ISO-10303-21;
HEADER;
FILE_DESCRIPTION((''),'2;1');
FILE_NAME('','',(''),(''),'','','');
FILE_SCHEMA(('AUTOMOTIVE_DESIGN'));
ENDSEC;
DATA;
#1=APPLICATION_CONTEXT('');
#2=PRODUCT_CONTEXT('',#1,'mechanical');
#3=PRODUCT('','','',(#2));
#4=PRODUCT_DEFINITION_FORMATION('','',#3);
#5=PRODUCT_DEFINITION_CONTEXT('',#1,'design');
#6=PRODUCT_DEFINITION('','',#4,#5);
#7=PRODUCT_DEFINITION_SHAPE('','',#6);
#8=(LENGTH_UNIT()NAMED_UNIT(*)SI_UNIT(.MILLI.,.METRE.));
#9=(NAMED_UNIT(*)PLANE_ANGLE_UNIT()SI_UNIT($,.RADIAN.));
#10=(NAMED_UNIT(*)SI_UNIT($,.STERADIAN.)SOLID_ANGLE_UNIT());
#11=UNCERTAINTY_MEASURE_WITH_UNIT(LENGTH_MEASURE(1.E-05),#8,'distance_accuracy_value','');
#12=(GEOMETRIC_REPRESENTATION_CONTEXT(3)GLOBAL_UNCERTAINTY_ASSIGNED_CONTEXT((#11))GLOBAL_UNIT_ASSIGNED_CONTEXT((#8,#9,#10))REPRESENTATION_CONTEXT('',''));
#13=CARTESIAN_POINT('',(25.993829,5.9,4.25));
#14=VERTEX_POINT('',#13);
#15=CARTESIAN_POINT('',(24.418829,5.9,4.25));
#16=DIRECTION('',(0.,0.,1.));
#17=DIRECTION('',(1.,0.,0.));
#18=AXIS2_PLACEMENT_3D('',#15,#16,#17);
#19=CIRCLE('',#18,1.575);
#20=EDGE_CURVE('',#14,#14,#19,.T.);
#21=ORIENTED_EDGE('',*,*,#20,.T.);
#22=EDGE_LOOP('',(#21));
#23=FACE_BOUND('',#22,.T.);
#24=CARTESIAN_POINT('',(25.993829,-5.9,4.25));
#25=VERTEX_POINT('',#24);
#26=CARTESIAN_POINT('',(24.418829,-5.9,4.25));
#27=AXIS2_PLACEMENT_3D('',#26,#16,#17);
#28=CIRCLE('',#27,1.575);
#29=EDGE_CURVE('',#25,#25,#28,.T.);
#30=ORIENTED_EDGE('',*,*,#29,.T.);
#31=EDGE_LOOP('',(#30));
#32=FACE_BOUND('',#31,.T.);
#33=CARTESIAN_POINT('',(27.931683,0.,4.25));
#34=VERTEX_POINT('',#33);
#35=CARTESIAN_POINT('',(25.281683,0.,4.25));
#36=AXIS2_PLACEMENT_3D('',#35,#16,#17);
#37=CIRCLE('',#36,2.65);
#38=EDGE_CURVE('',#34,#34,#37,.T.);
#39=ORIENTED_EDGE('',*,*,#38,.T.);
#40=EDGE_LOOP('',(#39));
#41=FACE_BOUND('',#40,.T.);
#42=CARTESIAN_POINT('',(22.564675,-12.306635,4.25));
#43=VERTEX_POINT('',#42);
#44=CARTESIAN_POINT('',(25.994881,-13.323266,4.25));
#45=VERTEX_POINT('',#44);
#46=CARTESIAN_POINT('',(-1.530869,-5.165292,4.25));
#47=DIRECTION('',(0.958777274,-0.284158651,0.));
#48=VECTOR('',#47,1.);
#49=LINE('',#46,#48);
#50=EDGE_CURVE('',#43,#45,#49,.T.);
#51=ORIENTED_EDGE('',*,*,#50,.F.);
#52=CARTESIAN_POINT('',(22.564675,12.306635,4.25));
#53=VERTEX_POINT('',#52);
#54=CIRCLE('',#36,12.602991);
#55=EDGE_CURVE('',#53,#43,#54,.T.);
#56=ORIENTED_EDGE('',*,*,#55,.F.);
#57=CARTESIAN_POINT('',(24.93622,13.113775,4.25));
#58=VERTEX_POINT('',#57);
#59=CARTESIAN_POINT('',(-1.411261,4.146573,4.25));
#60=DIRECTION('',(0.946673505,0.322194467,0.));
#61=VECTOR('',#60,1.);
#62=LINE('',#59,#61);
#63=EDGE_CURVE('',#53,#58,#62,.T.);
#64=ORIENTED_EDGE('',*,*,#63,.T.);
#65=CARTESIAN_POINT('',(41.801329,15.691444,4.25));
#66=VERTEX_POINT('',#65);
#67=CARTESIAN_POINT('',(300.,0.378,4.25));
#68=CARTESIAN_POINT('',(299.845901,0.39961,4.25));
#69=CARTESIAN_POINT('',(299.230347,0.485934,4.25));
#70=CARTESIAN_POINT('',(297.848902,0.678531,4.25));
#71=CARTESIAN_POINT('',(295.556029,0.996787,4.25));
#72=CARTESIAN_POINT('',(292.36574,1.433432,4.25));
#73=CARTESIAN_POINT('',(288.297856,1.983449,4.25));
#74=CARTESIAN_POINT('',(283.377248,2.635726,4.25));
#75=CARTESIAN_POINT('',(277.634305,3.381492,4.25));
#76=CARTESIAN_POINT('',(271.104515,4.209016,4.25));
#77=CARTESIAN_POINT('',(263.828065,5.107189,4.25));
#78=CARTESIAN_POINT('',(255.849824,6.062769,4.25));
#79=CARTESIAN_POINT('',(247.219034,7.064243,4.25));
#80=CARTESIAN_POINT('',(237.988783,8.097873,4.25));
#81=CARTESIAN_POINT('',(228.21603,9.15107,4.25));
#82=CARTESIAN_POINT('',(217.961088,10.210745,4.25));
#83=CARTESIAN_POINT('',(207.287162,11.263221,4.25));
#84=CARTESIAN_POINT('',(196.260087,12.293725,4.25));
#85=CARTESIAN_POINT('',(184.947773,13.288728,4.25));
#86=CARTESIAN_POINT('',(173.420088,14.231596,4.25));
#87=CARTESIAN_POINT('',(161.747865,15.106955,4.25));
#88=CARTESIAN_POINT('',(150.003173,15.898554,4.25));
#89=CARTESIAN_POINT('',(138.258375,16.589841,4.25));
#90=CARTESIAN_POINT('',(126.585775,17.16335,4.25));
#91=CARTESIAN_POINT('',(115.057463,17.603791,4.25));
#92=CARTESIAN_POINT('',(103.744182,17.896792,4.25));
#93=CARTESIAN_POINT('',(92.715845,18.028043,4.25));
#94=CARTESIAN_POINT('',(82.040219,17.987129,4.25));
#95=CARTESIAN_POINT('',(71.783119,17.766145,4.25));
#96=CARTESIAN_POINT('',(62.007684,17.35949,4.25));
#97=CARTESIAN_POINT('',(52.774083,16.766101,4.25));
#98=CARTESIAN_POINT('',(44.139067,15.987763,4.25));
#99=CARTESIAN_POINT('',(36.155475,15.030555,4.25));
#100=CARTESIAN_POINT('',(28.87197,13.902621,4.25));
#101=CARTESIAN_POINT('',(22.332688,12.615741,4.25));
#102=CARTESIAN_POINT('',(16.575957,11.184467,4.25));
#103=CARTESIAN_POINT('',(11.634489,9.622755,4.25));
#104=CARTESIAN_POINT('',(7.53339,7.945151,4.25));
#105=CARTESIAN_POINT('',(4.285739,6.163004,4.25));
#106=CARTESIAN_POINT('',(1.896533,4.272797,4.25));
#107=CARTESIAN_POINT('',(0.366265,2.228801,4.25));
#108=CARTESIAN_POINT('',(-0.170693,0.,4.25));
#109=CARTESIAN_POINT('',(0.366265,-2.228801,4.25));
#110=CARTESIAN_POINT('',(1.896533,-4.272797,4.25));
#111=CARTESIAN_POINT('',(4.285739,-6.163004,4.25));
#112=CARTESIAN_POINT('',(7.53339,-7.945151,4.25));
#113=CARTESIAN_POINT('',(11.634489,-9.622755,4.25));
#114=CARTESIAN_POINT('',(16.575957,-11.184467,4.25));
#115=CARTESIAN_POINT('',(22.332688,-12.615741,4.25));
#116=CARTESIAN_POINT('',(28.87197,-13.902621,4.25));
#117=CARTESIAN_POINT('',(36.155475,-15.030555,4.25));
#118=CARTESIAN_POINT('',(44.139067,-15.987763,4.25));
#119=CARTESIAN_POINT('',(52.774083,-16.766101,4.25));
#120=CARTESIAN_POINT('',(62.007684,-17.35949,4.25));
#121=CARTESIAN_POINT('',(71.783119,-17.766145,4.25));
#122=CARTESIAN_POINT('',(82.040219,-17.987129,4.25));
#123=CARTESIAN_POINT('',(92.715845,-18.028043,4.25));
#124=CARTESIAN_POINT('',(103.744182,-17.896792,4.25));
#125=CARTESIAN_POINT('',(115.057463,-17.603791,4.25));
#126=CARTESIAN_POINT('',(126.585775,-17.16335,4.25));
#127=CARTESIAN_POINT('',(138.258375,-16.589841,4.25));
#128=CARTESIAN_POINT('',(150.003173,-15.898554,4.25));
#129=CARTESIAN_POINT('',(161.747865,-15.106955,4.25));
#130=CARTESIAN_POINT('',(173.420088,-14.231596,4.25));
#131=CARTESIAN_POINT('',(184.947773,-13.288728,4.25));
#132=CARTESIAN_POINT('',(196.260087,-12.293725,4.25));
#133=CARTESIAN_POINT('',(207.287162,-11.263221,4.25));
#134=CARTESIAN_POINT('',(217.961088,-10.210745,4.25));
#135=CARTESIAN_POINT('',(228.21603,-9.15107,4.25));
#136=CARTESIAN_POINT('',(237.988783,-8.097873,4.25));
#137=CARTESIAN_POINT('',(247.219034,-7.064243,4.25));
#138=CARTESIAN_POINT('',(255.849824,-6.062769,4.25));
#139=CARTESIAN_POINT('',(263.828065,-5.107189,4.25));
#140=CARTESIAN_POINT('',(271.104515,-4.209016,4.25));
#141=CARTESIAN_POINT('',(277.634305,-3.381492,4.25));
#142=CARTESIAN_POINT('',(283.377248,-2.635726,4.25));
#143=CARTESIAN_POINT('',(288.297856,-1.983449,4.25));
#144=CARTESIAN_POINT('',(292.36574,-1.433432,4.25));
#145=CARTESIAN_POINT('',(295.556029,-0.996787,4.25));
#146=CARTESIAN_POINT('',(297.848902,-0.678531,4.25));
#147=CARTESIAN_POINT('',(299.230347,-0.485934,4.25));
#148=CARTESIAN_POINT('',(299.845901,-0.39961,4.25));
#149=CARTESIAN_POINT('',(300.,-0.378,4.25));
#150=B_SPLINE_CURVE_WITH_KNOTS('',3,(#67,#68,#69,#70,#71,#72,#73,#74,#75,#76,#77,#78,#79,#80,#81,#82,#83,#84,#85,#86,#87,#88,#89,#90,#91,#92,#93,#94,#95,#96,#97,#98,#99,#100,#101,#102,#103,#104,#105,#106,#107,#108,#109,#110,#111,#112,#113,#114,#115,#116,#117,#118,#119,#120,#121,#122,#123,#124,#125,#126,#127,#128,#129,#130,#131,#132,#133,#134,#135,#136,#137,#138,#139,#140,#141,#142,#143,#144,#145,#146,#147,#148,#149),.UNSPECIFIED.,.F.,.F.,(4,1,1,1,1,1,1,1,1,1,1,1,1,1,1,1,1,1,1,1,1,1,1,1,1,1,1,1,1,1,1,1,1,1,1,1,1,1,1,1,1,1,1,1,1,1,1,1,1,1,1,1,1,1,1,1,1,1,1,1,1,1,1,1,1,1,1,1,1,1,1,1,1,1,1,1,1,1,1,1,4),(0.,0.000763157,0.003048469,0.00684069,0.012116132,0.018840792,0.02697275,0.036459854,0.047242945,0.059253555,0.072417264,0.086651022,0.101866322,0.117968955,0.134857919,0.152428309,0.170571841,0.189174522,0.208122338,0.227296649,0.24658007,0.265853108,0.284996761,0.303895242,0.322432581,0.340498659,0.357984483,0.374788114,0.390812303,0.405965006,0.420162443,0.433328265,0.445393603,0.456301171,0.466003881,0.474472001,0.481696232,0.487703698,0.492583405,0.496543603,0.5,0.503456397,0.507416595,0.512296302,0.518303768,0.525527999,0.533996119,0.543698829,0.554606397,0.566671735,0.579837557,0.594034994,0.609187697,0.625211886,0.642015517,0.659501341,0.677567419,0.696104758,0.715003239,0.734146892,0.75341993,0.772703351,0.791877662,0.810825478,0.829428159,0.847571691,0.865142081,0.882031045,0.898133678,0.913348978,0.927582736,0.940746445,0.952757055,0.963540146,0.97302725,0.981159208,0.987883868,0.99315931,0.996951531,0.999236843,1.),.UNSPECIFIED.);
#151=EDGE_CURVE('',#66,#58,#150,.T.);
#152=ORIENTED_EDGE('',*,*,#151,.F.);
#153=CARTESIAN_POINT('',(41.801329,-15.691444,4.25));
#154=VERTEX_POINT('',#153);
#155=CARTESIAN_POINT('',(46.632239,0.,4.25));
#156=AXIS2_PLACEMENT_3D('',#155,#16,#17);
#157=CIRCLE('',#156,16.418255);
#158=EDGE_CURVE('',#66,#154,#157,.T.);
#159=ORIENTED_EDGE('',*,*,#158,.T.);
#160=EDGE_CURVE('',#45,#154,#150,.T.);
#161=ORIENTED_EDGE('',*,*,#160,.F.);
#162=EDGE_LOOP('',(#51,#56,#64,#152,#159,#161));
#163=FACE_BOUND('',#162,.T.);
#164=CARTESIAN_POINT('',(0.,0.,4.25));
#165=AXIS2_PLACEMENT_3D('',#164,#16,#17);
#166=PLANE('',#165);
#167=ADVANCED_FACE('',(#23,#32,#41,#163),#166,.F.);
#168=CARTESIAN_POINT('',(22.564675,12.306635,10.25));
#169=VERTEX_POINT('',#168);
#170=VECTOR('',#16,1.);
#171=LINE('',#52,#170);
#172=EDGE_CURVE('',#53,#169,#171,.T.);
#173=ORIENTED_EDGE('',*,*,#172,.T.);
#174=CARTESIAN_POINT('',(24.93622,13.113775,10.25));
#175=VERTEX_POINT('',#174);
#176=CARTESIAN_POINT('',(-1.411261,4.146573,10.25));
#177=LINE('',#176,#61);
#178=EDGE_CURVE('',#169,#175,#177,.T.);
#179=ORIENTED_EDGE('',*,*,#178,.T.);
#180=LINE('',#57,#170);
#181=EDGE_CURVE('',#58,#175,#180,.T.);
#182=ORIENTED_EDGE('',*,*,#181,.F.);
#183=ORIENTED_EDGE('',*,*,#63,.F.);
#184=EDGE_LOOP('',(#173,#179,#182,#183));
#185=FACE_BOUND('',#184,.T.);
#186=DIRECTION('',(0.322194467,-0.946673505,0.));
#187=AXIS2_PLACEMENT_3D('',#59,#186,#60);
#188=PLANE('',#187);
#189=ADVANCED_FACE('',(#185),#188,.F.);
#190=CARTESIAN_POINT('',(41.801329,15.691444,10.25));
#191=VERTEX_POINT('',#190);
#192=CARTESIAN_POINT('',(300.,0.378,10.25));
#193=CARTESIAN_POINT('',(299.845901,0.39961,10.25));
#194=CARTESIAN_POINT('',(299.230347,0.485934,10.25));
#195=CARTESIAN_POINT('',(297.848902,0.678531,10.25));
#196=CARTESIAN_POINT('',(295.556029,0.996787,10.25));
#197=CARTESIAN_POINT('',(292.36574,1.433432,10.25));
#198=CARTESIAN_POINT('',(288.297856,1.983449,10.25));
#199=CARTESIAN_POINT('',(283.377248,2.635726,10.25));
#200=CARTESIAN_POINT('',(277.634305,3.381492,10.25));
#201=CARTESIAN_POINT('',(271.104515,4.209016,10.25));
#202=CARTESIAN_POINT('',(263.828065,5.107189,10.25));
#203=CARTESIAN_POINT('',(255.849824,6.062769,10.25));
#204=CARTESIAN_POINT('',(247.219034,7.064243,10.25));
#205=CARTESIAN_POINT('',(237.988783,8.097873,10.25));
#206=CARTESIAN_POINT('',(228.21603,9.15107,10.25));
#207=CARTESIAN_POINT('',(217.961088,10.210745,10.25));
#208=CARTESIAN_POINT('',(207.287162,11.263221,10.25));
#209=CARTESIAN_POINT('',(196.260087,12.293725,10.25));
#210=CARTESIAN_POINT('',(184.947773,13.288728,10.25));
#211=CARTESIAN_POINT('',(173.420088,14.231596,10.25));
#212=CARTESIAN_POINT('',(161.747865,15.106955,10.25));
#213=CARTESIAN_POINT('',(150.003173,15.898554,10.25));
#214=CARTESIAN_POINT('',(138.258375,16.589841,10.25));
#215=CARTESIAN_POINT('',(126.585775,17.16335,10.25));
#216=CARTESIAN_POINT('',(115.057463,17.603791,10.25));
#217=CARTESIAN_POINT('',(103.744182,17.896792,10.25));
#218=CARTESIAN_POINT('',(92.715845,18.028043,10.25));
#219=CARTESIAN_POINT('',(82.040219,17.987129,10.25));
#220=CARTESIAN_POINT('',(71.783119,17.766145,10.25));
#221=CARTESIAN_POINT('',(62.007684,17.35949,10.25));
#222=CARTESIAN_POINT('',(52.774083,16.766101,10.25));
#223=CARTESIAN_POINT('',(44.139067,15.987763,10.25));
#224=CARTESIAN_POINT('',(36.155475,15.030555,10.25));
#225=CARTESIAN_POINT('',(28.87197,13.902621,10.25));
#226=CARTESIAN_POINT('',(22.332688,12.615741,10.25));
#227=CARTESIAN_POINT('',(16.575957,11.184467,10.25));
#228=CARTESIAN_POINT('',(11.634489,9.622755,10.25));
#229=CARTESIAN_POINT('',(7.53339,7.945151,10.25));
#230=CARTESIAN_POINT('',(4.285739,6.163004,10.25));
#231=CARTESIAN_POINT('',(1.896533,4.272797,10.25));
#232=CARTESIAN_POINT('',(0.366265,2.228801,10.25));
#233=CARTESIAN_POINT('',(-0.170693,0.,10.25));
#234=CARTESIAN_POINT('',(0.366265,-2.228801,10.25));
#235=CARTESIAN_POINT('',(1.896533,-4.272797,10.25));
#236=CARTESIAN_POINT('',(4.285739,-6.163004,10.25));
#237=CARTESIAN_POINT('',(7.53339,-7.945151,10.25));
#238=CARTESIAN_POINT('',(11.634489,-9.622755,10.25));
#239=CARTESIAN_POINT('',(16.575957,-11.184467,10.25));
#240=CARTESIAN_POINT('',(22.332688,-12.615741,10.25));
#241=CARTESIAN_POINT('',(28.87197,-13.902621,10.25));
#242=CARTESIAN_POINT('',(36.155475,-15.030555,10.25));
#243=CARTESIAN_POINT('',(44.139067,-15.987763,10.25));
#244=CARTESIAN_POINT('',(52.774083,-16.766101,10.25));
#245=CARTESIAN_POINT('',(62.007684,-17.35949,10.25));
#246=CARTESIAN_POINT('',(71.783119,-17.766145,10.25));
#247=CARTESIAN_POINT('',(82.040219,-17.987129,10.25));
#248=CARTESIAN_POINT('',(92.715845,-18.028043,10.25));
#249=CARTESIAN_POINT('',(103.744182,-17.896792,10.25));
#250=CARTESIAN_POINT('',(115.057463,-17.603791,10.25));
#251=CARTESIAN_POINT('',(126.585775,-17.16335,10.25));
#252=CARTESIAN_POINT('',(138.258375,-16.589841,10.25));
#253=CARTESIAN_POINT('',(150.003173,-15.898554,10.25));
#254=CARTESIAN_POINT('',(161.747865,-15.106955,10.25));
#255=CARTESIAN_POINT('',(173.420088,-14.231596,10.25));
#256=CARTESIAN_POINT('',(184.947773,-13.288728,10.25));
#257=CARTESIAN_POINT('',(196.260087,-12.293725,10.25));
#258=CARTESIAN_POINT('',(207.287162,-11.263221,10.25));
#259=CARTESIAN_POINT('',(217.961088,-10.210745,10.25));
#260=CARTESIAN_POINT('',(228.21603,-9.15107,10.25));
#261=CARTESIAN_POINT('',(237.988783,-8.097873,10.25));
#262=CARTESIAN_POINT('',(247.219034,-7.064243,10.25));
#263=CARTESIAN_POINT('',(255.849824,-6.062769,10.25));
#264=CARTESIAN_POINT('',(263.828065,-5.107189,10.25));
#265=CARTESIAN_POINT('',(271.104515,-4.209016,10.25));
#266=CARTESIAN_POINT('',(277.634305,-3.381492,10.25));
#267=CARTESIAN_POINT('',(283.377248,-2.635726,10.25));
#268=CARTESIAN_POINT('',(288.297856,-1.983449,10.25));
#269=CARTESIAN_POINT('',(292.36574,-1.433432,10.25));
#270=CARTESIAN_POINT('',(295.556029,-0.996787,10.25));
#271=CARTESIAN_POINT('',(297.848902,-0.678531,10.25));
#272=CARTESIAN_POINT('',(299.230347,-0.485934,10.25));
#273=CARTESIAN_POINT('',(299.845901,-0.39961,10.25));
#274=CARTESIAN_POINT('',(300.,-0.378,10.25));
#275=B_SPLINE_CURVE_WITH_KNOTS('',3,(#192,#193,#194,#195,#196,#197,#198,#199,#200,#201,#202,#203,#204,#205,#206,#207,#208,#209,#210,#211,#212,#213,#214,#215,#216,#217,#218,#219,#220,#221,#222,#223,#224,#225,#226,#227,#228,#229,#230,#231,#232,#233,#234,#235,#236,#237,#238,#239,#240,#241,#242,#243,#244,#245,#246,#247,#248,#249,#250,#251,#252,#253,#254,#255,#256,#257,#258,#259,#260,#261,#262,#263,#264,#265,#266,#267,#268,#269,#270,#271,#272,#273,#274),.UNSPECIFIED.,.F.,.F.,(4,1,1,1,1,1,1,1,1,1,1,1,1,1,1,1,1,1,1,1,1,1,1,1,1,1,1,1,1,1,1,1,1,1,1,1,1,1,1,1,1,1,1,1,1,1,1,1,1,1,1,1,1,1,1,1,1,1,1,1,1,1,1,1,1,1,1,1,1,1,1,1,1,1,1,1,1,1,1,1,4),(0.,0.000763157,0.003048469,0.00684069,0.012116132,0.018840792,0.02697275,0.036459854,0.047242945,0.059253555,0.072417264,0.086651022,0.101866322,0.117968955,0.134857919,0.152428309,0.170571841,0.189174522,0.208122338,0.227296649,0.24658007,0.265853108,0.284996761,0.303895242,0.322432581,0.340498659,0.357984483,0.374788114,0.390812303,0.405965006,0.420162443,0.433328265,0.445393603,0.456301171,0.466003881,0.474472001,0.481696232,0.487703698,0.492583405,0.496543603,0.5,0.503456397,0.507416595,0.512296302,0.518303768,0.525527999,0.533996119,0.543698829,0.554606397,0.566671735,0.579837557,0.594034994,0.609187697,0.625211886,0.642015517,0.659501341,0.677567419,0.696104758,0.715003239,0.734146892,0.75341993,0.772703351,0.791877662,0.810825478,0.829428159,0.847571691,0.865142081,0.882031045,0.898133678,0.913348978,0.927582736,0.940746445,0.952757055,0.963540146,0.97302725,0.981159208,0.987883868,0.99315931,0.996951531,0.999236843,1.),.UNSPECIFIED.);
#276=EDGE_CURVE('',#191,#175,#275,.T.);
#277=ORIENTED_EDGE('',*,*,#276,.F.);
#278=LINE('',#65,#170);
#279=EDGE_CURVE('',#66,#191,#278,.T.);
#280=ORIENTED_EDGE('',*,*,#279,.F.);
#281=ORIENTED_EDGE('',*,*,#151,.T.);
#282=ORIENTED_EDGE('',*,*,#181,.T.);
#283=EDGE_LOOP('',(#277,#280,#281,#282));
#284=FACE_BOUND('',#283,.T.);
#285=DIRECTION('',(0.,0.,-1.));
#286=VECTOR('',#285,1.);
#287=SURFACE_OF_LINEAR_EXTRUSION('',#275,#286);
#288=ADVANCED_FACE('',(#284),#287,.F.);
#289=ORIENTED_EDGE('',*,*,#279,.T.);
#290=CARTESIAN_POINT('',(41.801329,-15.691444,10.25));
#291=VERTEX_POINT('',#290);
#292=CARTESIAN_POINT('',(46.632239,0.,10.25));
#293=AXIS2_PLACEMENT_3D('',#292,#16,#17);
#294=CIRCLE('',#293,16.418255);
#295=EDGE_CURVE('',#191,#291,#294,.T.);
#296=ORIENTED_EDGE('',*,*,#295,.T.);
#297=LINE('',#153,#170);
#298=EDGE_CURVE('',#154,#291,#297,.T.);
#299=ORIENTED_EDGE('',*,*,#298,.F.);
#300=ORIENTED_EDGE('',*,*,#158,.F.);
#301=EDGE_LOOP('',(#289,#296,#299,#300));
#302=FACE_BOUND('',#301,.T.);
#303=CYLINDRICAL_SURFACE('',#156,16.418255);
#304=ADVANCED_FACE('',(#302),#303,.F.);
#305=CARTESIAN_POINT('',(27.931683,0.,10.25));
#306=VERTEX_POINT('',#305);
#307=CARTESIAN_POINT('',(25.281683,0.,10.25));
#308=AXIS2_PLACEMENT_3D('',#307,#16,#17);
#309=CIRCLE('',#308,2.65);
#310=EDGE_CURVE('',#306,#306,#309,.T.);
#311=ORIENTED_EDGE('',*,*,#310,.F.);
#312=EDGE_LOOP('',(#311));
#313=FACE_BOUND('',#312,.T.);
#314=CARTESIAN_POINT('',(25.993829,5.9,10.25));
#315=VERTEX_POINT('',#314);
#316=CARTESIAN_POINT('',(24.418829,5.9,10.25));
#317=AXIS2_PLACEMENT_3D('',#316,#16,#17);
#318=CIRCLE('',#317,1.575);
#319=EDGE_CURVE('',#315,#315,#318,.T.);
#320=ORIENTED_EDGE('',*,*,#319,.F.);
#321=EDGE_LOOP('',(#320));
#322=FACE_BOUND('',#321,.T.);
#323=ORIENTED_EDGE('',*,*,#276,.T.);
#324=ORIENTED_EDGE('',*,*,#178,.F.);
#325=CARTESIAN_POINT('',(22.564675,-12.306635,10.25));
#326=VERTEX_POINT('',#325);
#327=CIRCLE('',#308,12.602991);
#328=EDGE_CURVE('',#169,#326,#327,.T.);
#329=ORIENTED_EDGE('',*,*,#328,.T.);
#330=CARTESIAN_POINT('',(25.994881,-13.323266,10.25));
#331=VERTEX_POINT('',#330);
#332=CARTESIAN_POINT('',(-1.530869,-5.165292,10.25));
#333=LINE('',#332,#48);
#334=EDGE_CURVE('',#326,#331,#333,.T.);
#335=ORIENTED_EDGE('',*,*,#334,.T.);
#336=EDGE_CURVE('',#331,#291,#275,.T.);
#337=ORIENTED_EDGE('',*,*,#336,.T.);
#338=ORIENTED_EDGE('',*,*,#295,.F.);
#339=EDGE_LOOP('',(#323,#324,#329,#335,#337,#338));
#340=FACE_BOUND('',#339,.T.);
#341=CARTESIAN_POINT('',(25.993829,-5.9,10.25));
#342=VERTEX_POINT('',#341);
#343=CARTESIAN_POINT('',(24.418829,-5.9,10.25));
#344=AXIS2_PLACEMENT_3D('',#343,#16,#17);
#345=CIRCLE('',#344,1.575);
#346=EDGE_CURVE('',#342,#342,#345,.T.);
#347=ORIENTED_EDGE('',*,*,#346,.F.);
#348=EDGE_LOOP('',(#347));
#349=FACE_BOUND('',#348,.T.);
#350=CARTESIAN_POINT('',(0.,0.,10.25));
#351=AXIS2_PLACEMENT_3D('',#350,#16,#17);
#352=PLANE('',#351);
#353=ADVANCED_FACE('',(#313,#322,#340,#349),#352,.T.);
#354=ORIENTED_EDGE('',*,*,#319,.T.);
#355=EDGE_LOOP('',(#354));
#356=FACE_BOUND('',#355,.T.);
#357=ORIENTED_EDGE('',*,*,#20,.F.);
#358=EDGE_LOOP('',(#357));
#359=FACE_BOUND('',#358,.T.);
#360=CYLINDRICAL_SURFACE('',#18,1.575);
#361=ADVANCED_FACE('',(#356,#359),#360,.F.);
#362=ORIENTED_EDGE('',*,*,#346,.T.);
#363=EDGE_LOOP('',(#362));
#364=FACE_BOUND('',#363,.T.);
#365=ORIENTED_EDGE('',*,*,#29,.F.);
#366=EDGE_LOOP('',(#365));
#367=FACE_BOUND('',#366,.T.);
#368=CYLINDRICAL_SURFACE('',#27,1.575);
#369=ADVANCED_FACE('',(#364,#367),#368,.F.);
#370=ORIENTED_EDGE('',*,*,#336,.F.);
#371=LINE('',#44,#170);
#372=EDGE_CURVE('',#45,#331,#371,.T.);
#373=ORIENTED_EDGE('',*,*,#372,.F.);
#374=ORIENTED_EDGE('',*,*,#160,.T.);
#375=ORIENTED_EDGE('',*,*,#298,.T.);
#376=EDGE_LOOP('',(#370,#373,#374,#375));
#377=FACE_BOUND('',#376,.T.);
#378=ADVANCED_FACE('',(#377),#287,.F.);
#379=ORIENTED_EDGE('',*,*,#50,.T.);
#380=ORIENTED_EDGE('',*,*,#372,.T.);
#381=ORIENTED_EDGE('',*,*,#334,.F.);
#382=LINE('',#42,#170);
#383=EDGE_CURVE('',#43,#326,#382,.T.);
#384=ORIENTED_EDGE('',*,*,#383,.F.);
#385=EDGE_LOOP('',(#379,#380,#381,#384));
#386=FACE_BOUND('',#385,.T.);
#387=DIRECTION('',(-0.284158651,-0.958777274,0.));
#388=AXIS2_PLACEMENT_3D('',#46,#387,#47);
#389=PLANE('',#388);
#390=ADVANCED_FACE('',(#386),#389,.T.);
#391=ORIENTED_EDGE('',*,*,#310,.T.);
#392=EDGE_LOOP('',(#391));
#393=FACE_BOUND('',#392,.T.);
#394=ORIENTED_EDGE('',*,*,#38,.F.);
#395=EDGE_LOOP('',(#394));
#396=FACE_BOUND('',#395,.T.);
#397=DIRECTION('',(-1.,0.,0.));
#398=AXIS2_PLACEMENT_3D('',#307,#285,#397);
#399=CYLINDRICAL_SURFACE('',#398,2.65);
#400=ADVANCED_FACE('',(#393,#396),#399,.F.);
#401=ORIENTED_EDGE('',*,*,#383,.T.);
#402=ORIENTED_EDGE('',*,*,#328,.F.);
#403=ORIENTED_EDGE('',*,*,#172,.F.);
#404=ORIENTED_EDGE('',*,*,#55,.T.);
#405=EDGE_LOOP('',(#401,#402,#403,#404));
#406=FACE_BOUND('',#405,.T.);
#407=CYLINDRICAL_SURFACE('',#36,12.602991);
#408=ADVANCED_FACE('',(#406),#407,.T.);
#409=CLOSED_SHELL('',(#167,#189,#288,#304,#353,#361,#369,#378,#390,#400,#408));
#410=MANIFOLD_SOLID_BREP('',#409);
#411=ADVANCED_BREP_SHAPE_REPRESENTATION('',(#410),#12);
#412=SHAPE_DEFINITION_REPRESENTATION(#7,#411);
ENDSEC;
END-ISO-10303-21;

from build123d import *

# Parameters (mm, degrees)
BOSS_EXTRUDE1_START     = 4.25
BOSS_EXTRUDE1_OUTLINE_R = 2.65
BOSS_EXTRUDE1_DEPTH     = 6
CUT_EXTRUDE2_DEPTH      = 49.147003594
CUT_EXTRUDE3_DEPTH      = 46.050777478


# Read off the part's stored shape, not the designer's step: Boss-Extrude1
with BuildPart() as part:
    # Boss-Extrude1 outline → Boss-Extrude1 (new body)
    with BuildSketch(Plane.XY.offset(BOSS_EXTRUDE1_START)):
        with BuildLine():
            ThreePointArc((22.5, 12.599580353), (12.378691282, 0), (22.5, -12.599580353))
            add(Edge.make_bspline(
                [(22.5, -12.599580353), (24.539912926, -13.049943774), (29.005619164, -13.923317691), (36.155474951, -15.030554758), (41.619048326, -15.685620583), (44.644632939, -15.999223801), (45, -16.035396523)],
                knots=[0.544361959, 0.544361959, 0.544361959, 0.544361959, 0.554606397, 0.566671735, 0.579837557, 0.581589368, 0.581589368, 0.581589368, 0.581589368], degree=3))
            ThreePointArc((45, -16.035396523), (30.513983858, 0), (45, 16.035396523))
            add(Edge.make_bspline(
                [(45, 16.035396523), (44.644632939, 15.999223801), (41.619048326, 15.685620583), (36.155474951, 15.030554758), (29.005619164, 13.923317691), (24.539912926, 13.049943774), (22.5, 12.599580353)],
                knots=[0.418410632, 0.418410632, 0.418410632, 0.418410632, 0.420162443, 0.433328265, 0.445393603, 0.455638041, 0.455638041, 0.455638041, 0.455638041], degree=3))
        make_face()
        with Locations((25.281682512, 0)):
            Circle(BOSS_EXTRUDE1_OUTLINE_R, mode=Mode.SUBTRACT)
    extrude(amount=BOSS_EXTRUDE1_DEPTH)

    # Sketch3 → Cut-Extrude2 (cut, through all)
    with BuildSketch(Plane.XY.offset(10.25)):
        with BuildLine():
            ThreePointArc((22.564675294, -12.306634784), (12.678691282, 0), (22.564675294, 12.306634784))
            Line((22.564675294, 12.306634784), (24.936220162, 13.113775399))
            add(Edge.make_bspline(
                [(24.936220162, 13.113775399), (24.122635067, 12.949661044), (23.310473255, 12.77851324), (22.5, 12.599580353)],
                knots=[0.451567846, 0.451567846, 0.451567846, 0.451567846, 0.455638041, 0.455638041, 0.455638041, 0.455638041], degree=3))
            ThreePointArc((22.5, 12.599580353), (12.378691282, 0), (22.5, -12.599580353))
            add(Edge.make_bspline(
                [(22.5, -12.599580353), (23.661751431, -12.856066962), (24.826972348, -13.096557541), (25.994881444, -13.323265839)],
                knots=[0.544361959, 0.544361959, 0.544361959, 0.544361959, 0.550196272, 0.550196272, 0.550196272, 0.550196272], degree=3))
            Line((25.994881444, -13.323265839), (22.564675294, -12.306634784))
        make_face()
        with BuildLine():
            add(Edge.make_bspline(
                [(45, 16.035396523), (44.644632939, 15.999223801), (43.577975433, 15.888664266), (42.511942906, 15.772070236), (41.801329262, 15.691443866)],
                knots=[0.418410632, 0.418410632, 0.418410632, 0.418410632, 0.420162443, 0.423669783, 0.423669783, 0.423669783, 0.423669783], degree=3))
            ThreePointArc((41.801329262, 15.691443866), (30.213983858, 0), (41.801329262, -15.691443866))
            add(Edge.make_bspline(
                [(41.801329262, -15.691443866), (42.511942906, -15.772070236), (43.577975433, -15.888664266), (44.644632939, -15.999223801), (45, -16.035396523)],
                knots=[0.576330217, 0.576330217, 0.576330217, 0.576330217, 0.579837557, 0.581589368, 0.581589368, 0.581589368, 0.581589368], degree=3))
            ThreePointArc((45, -16.035396523), (30.513983858, 0), (45, 16.035396523))
        make_face()
    extrude(amount=-CUT_EXTRUDE2_DEPTH, mode=Mode.SUBTRACT)

    # Sketch4 → Cut-Extrude3 (cut, through all)
    with BuildSketch(Plane.XY.offset(10.25)):
        with BuildLine():
            ThreePointArc((25.993828758, 5.9), (25.532521939, 7.01369318), (24.418828758, 7.475))
            Line((24.418828758, 7.475), (24.418828758, 4.325))
            ThreePointArc((24.418828758, 4.325), (25.532521939, 4.78630682), (25.993828758, 5.9))
        make_face()
        with BuildLine():
            Line((24.418828758, 4.325), (24.418828758, 7.475))
            ThreePointArc((24.418828758, 7.475), (22.843828758, 5.9), (24.418828758, 4.325))
        make_face()
        with BuildLine():
            ThreePointArc((25.993828758, -5.9), (25.532521939, -4.78630682), (24.418828758, -4.325))
            Line((24.418828758, -4.325), (24.418828758, -7.475))
            ThreePointArc((24.418828758, -7.475), (25.532521939, -7.01369318), (25.993828758, -5.9))
        make_face()
        with BuildLine():
            Line((24.418828758, -7.475), (24.418828758, -4.325))
            ThreePointArc((24.418828758, -4.325), (22.843828758, -5.9), (24.418828758, -7.475))
        make_face()
    extrude(amount=-CUT_EXTRUDE3_DEPTH, mode=Mode.SUBTRACT)


solid = part.part
